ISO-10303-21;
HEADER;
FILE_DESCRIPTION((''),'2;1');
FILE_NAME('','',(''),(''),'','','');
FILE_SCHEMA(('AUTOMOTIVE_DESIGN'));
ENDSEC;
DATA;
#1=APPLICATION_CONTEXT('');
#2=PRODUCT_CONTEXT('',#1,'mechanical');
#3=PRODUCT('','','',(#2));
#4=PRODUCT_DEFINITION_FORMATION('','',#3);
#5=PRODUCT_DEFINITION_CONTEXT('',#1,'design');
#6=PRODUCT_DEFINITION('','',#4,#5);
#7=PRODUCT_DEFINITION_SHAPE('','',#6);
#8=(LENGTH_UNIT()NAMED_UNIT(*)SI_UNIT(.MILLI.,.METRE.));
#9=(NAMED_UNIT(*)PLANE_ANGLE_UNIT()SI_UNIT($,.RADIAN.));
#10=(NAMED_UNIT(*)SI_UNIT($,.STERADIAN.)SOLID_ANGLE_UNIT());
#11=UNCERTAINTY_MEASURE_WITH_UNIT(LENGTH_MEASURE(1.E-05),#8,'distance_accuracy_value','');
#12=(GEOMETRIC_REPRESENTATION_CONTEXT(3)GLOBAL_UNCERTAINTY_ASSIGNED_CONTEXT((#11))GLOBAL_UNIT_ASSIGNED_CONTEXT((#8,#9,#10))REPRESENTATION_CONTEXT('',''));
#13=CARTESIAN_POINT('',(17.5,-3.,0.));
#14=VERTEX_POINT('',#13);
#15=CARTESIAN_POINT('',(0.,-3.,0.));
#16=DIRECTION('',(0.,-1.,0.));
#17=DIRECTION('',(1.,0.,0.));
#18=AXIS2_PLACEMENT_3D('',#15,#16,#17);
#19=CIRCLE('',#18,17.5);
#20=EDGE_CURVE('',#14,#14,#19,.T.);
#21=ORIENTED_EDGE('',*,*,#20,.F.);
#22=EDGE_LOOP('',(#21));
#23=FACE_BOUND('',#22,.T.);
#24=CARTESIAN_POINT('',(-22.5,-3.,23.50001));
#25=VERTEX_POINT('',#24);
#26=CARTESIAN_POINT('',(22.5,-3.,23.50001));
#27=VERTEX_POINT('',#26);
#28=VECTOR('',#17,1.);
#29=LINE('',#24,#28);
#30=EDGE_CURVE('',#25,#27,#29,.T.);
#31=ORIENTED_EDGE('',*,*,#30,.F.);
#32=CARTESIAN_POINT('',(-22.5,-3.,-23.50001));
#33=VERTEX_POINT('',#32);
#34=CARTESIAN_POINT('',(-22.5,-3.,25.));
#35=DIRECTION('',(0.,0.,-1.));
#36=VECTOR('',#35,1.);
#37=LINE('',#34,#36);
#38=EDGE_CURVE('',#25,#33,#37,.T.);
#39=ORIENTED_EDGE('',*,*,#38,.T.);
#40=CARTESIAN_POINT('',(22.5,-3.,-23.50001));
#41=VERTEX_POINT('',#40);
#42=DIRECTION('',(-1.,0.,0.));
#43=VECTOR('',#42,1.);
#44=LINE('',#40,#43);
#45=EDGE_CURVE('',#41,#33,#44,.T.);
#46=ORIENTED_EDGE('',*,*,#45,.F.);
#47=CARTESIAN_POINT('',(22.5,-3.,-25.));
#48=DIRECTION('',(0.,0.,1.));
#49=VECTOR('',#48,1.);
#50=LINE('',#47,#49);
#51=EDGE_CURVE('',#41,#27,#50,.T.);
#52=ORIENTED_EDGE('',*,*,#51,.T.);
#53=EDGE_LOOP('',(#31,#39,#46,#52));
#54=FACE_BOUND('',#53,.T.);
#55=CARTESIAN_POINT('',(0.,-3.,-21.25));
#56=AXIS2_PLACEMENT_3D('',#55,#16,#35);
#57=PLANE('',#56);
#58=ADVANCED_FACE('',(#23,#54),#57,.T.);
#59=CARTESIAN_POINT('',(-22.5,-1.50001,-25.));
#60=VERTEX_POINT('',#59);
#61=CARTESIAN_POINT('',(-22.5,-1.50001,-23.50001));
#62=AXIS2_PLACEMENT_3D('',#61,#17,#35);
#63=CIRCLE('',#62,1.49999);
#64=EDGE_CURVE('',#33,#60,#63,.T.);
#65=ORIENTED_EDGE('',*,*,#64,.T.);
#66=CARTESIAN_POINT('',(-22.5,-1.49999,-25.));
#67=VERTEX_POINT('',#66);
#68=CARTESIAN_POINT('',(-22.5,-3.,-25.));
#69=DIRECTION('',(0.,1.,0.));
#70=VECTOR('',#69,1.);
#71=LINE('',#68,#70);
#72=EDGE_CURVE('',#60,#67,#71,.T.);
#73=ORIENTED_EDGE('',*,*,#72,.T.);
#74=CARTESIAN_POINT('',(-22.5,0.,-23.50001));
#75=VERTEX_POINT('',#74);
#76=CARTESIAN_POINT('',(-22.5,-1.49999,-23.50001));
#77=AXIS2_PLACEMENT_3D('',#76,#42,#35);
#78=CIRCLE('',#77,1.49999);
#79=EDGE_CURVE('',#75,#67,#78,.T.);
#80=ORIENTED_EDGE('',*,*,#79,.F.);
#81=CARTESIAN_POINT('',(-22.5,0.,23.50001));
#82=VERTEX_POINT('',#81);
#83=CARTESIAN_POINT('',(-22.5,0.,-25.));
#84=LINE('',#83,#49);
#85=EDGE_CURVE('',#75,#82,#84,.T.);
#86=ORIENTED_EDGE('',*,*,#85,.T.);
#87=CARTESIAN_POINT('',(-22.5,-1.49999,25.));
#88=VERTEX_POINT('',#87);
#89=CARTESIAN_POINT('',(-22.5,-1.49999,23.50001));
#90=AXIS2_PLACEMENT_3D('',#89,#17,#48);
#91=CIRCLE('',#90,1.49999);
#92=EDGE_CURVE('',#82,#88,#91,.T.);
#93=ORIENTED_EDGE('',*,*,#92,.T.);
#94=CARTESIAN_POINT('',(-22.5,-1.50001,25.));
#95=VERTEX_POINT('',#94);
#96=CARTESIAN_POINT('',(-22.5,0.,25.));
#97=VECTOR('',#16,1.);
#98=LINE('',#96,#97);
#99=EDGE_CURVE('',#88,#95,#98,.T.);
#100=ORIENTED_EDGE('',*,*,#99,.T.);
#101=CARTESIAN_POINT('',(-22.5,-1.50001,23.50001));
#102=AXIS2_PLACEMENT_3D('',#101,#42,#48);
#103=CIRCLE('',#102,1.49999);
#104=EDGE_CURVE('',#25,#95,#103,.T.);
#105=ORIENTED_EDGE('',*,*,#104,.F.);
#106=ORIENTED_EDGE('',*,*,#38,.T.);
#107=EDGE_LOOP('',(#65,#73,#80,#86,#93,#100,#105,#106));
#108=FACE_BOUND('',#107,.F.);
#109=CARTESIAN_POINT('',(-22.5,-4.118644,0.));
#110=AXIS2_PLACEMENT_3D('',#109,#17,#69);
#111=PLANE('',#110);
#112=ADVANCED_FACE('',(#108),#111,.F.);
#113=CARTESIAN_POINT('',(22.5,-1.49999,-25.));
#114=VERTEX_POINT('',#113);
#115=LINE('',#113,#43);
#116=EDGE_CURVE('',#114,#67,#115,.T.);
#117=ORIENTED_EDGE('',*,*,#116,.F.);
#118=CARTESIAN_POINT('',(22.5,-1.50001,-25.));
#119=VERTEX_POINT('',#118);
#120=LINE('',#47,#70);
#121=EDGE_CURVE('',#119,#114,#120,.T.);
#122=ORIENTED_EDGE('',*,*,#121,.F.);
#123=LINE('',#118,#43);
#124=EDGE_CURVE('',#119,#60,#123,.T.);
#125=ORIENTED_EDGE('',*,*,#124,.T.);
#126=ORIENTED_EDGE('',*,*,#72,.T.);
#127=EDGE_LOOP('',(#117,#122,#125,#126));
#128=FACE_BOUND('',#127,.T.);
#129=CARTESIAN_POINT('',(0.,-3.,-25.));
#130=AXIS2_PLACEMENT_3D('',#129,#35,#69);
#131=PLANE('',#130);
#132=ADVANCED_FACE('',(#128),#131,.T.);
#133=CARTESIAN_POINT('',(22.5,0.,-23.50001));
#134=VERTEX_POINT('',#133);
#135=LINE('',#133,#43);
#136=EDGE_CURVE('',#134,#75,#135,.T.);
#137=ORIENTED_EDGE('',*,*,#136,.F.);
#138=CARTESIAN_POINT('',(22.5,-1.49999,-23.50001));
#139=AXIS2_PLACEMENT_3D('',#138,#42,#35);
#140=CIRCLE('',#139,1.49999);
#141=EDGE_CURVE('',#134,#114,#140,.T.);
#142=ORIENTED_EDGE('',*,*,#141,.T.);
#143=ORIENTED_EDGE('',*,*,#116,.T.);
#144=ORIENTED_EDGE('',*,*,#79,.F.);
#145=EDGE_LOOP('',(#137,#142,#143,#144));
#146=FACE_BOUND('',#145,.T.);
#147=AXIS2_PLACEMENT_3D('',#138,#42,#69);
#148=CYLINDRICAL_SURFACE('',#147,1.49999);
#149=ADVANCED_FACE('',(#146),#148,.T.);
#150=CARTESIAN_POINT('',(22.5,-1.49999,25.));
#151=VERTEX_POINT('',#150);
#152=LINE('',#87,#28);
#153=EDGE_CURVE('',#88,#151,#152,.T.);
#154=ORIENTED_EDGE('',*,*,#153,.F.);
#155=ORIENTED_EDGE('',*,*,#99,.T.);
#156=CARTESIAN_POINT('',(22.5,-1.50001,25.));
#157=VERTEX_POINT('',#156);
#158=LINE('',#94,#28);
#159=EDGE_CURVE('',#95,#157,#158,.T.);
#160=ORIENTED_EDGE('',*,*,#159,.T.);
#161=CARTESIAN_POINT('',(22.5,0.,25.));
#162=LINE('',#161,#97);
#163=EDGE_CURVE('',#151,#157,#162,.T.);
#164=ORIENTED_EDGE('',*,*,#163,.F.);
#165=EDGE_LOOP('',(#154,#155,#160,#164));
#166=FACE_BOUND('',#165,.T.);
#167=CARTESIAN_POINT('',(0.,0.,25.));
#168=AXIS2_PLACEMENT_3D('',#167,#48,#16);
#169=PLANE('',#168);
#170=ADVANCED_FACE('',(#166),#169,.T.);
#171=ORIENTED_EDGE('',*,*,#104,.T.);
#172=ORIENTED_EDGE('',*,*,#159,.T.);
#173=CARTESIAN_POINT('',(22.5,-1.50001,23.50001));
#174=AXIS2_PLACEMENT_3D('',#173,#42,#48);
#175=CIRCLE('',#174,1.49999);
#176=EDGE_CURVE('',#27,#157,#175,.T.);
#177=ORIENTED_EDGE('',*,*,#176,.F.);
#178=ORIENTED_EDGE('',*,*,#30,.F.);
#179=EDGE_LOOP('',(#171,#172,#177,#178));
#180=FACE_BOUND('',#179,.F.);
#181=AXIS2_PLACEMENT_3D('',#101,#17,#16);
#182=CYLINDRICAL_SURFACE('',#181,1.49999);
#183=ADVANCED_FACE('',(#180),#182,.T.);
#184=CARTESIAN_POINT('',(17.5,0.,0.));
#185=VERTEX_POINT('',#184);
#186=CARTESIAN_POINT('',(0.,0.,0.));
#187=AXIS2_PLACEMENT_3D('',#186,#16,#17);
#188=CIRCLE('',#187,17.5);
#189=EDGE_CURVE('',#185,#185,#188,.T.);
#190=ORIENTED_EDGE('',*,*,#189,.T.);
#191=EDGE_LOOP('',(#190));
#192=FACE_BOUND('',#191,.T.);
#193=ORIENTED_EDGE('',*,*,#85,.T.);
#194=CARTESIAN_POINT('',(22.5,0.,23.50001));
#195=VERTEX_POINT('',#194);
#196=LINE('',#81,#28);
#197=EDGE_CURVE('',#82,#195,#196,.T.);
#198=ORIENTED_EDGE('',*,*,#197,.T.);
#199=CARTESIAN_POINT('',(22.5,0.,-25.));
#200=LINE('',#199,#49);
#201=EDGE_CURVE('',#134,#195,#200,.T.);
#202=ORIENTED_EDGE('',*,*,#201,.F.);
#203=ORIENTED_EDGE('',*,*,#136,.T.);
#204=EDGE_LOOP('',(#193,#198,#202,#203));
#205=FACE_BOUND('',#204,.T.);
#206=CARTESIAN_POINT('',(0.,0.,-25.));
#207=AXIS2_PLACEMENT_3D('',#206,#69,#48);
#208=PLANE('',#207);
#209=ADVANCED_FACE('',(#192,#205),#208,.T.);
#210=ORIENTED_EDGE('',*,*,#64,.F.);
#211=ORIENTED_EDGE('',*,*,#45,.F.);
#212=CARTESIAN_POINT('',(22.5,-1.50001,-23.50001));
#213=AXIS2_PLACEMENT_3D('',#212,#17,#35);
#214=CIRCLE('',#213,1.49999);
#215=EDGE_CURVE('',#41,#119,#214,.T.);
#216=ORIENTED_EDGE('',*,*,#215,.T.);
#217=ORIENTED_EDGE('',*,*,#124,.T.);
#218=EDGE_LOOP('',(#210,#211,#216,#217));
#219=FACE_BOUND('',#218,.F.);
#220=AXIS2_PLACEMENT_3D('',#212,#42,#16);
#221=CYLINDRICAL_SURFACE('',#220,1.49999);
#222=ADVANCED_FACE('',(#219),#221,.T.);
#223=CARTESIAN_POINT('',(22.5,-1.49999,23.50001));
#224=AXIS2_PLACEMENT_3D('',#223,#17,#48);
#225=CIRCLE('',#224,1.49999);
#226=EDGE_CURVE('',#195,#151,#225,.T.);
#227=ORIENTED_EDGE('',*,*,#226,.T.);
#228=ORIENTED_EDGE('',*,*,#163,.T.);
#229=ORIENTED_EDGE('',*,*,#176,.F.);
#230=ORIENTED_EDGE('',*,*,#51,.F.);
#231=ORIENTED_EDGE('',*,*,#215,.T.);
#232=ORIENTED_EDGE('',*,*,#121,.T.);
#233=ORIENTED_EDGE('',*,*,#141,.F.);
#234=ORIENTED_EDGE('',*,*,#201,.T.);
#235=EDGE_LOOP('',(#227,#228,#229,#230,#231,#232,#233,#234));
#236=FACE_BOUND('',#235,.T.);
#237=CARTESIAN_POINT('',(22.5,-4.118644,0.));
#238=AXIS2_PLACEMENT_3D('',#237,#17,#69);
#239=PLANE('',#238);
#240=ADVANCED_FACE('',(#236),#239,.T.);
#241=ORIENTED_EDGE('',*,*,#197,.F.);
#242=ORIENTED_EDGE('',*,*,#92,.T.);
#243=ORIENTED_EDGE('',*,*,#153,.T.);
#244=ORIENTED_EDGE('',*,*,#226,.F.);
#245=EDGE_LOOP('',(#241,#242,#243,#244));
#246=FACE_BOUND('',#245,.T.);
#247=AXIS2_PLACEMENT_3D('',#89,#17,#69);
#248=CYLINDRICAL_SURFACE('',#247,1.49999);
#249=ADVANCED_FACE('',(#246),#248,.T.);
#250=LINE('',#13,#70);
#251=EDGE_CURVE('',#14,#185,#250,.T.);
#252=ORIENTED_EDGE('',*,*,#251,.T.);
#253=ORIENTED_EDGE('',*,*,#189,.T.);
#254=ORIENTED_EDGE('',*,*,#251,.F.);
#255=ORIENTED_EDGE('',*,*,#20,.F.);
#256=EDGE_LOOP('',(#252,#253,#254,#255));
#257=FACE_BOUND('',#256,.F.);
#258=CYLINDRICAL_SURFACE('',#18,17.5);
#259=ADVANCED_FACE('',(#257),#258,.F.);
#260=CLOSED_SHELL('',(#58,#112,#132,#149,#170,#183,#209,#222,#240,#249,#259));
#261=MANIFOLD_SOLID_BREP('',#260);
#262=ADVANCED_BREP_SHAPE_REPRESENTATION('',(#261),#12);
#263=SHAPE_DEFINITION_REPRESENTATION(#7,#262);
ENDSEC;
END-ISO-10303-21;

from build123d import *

# Parameters (mm, degrees)
F1_DEPTH     = 22.5
F2_R         = 18.6
F3_DEPTH     = 6
F4_R         = 17.5
F5_DEPTH     = 3
F7_DEPTH     = 3
F8_DEPTH     = 3
F14_DEPTH    = 3
F9_T1_DEPTH  = 3
F9_T6_DEPTH  = 3
F9_T11_DEPTH = 3
F15_W        = 6
F15_H        = 97.4
F10_DEPTH    = 45.001
F11_R        = 1.49999


# Not quite as in the source:
# - a fillet or chamfer that OpenCascade refuses, or shapes differently, is made with other operations: its cross-section is extruded or revolved along the edge and cut away or added
# - a fillet or chamfer is up to 0.001 mm smaller than in the source, because OpenCascade refuses the exact size


with BuildPart() as f1:
    # F0 (on Right) → F1 (new body, symmetric)
    with BuildSketch(Plane.YZ):
        Polygon((0, -25), (0, 25), (-3, 25), (-3, 21.25), (-9, 21.25), (-9, -21.25), (-3, -21.25), (-3, -25), align=None)
    extrude(amount=F1_DEPTH, both=True)

    # F2 (on face) → F3 (cut)
    with BuildSketch(Plane.XZ.offset(9)):
        Circle(F2_R)
    extrude(amount=-F3_DEPTH, mode=Mode.SUBTRACT)

    # F4 (on face) → F5 (cut, through all)
    with BuildSketch(Plane.XZ.offset(3)):
        Circle(F4_R)
    extrude(amount=-F5_DEPTH, mode=Mode.SUBTRACT)

    # F6 (on face) → F7 (join)
    with BuildSketch(Plane.XZ.offset(9)):
        with BuildLine():
            Line((-1.6773361726, 21.1145450883), (-1.5, 21.05))
            Line((-1.5, 21.05), (2.8857066002, 21.05))
            Line((2.8857066002, 21.05), (-1.1643059576, 22.5240840195))
            ThreePointArc((-1.1643059576, 22.5240840195), (-1.8221335094, 23.4812290467), (-1.1313028087, 24.4148331565))
            Line((-1.1313028087, 24.4148331565), (1.1823725422, 25.1665918487))
            ThreePointArc((1.1823725422, 25.1665918487), (2.9098300563, 27.5442331395), (1.1823725422, 29.9218744302))
            Line((1.1823725422, 29.9218744302), (-2.6423503277, 31.1646022233))
            ThreePointArc((-2.6423503277, 31.1646022233), (-3.3282367753, 32.0148264964), (-2.8268835217, 32.9853760566))
            Line((-2.8268835217, 32.9853760566), (3.5672088043, 36.6139176646))
            ThreePointArc((3.5672088043, 36.6139176646), (4.8205919381, 39.0402915651), (3.1058758193, 41.165852248))
            Line((3.1058758193, 41.165852248), (-0.0769036922, 42.2))
            Line((-0.0769036922, 42.2), (-4.9310056584, 42.2))
            Line((-4.9310056584, 42.2), (2.6423503277, 39.7392674735))
            ThreePointArc((2.6423503277, 39.7392674735), (3.3282367753, 38.8890432004), (2.8268835217, 37.9184936402))
            Line((2.8268835217, 37.9184936402), (-3.5672088043, 34.2899520321))
            ThreePointArc((-3.5672088043, 34.2899520321), (-4.8205919381, 31.8635781317), (-3.1058758193, 29.7380174488))
            Line((-3.1058758193, 29.7380174488), (0.7188470506, 28.4952896558))
            ThreePointArc((0.7188470506, 28.4952896558), (1.4098300563, 27.5442331395), (0.7188470506, 26.5931766232))
            Line((0.7188470506, 26.5931766232), (-1.5948283002, 25.841417931))
            ThreePointArc((-1.5948283002, 25.841417931), (-3.3219050522, 23.5074076563), (-1.6773361726, 21.1145450883))
        make_face()
        with BuildLine():
            Line((3.5672088043, -36.6139176646), (-2.8268835217, -32.9853760566))
            ThreePointArc((-2.8268835217, -32.9853760566), (-3.3282367753, -32.0148264964), (-2.6423503277, -31.1646022233))
            Line((-2.6423503277, -31.1646022233), (1.1823725422, -29.9218744302))
            ThreePointArc((1.1823725422, -29.9218744302), (2.9098300563, -27.5442331395), (1.1823725422, -25.1665918487))
            Line((1.1823725422, -25.1665918487), (-1.1313028087, -24.4148331565))
            ThreePointArc((-1.1313028087, -24.4148331565), (-1.8221335094, -23.4812290467), (-1.1643059576, -22.5240840195))
            Line((-1.1643059576, -22.5240840195), (2.8857066002, -21.05))
            Line((2.8857066002, -21.05), (-1.5, -21.05))
            Line((-1.5, -21.05), (-1.6773361726, -21.1145450883))
            ThreePointArc((-1.6773361726, -21.1145450883), (-3.3219050522, -23.5074076563), (-1.5948283002, -25.841417931))
            Line((-1.5948283002, -25.841417931), (0.7188470506, -26.5931766232))
            ThreePointArc((0.7188470506, -26.5931766232), (1.4098300563, -27.5442331395), (0.7188470506, -28.4952896558))
            Line((0.7188470506, -28.4952896558), (-3.1058758193, -29.7380174488))
            ThreePointArc((-3.1058758193, -29.7380174488), (-4.8205919381, -31.8635781317), (-3.5672088043, -34.2899520321))
            Line((-3.5672088043, -34.2899520321), (2.8268835217, -37.9184936402))
            ThreePointArc((2.8268835217, -37.9184936402), (3.3282367753, -38.8890432004), (2.6423503277, -39.7392674735))
            Line((2.6423503277, -39.7392674735), (-4.9310056584, -42.2))
            Line((-4.9310056584, -42.2), (-0.0769036922, -42.2))
            Line((-0.0769036922, -42.2), (3.1058758193, -41.165852248))
            ThreePointArc((3.1058758193, -41.165852248), (4.8205919381, -39.0402915651), (3.5672088043, -36.6139176646))
        make_face()
    extrude(amount=-F7_DEPTH)

    # F12 (on face) → F8 (join)
    with BuildSketch(Plane.XZ.offset(9)):
        with BuildLine():
            Line((-10.0039546753, 45.1082380117), (-10.0039546753, 41.7))
            Line((-10.0039546753, 41.7), (-2.5039546753, 41.7))
            Line((-2.5039546753, 41.7), (4.9960453247, 41.7))
            Line((4.9960453247, 41.7), (4.9960453247, 45.1082380117))
            ThreePointArc((4.9960453247, 45.1082380117), (4.9619908828, 45.2896070742), (4.8644663773, 45.446270448))
            ThreePointArc((4.8644663773, 45.446270448), (-2.5039546753, 48.6856217223), (-9.872375728, 45.446270448))
            ThreePointArc((-9.872375728, 45.446270448), (-9.9699002335, 45.2896070742), (-10.0039546753, 45.1082380117))
        make_face()
        with BuildLine():
            Line((4.9960453247, -41.7), (-10.0039546753, -41.7))
            Line((-10.0039546753, -41.7), (-10.0039546753, -45.1082380117))
            ThreePointArc((-10.0039546753, -45.1082380117), (-9.9699002335, -45.2896070742), (-9.872375728, -45.446270448))
            ThreePointArc((-9.872375728, -45.446270448), (-2.5039546753, -48.6856217223), (4.8644663773, -45.446270448))
            ThreePointArc((4.8644663773, -45.446270448), (4.9619908828, -45.2896070742), (4.9960453247, -45.1082380117))
            Line((4.9960453247, -45.1082380117), (4.9960453247, -41.7))
        make_face()
    extrude(amount=-F8_DEPTH)

    # F13 (on face) → F14 (join)
    with BuildSketch(Plane(origin=(0, -6, 0), x_dir=(-1, 0, 0), z_dir=(0, 1, 0))):
        Polygon((-4.9960453247, 41.7), (10.0039546753, 41.7), (10.0039546753, 41.9), (9.0039546753, 42.9), (8.0039546753, 41.9), (7.0039546753, 42.9), (6.0039546753, 41.9), (5.0039546753, 42.9), (4.0039546753, 41.9), (3.0039546753, 42.9), (2.0039546753, 41.9), (1.0039546753, 42.9), (0.0039546753, 41.9), (-0.9960453247, 42.9), (-1.9960453247, 41.9), (-2.9960453247, 42.9), (-3.9960453247, 41.9), (-4.9960453247, 42.9), align=None)
        Polygon((-4.9960453247, -41.7), (-4.9960453247, -42.9), (-3.9960453247, -41.9), (-2.9960453247, -42.9), (-1.9960453247, -41.9), (-0.9960453247, -42.9), (0.0039546753, -41.9), (1.0039546753, -42.9), (2.0039546753, -41.9), (3.0039546753, -42.9), (4.0039546753, -41.9), (5.0039546753, -42.9), (6.0039546753, -41.9), (7.0039546753, -42.9), (8.0039546753, -41.9), (9.0039546753, -42.9), (10.0039546753, -41.9), (10.0039546753, -41.7), align=None)
    extrude(amount=F14_DEPTH)

    # F9: fillet of radius 1 on 8 edges, made by hand

    # F9_s2 → F9_t1 (join)
    with BuildSketch(Plane.XZ.offset(6)):
        with BuildLine():
            ThreePointArc((-3.1671397399, 22.5967933258), (-3.2844738139, 21.6785077979), (-4.1050813101, 21.25))
            Line((-4.1050813101, 21.25), (-1.9838334832, 21.25))
            ThreePointArc((-1.9838334832, 21.25), (-2.7003635819, 21.813678492), (-3.1671397399, 22.5967933258))
        make_face()
        with BuildLine():
            ThreePointArc((2.1705179537, 21.3103073792), (2.3388899194, 21.265192247), (2.5125380971, 21.25))
            Line((2.5125380971, 21.25), (2.3362111164, 21.25))
            Line((2.3362111164, 21.25), (2.1705179537, 21.3103073792))
        make_face()
        with BuildLine():
            ThreePointArc((-3.2415313358, 41.6510565163), (-3.3941138651, 41.6876883406), (-3.5505483302, 41.7))
            Line((-3.5505483302, 41.7), (-3.3921638899, 41.7))
            Line((-3.3921638899, 41.7), (-3.2415313358, 41.6510565163))
        make_face()
        with BuildLine():
            ThreePointArc((-3.1671397399, -22.5967933258), (-3.2844738139, -21.6785077979), (-4.1050813101, -21.25))
            Line((-4.1050813101, -21.25), (-1.9838334832, -21.25))
            ThreePointArc((-1.9838334832, -21.25), (-2.7003635819, -21.813678492), (-3.1671397399, -22.5967933258))
        make_face()
        with BuildLine():
            ThreePointArc((-3.5505483302, -41.7), (-3.3941138651, -41.6876883406), (-3.2415313358, -41.6510565163))
            Line((-3.2415313358, -41.6510565163), (-3.3921638899, -41.7))
            Line((-3.3921638899, -41.7), (-3.5505483302, -41.7))
        make_face()
        with BuildLine():
            ThreePointArc((2.1705179537, -21.3103073792), (2.3388899194, -21.265192247), (2.5125380971, -21.25))
            Line((2.5125380971, -21.25), (2.3362111164, -21.25))
            Line((2.3362111164, -21.25), (2.1705179537, -21.3103073792))
        make_face()
    extrude(amount=F9_T1_DEPTH)


with BuildPart() as f9_tool4:
    # F9_s5 → F9_t6 (new body)
    with BuildSketch(Plane.XZ.offset(9)):
        with BuildLine():
            ThreePointArc((5.265067062, 41.7), (4.3857987751, 41.1763268621), (4.4274288538, 40.1537745592))
            Line((4.4274288538, 40.1537745592), (4.343665033, 40.0991520151))
            ThreePointArc((4.343665033, 40.0991520151), (3.0749741198, 41.0707465963), (1.431036377, 41.6048943484))
            Line((1.431036377, 41.6048943484), (1.4619380764, 41.8))
            Line((1.4619380764, 41.8), (5.265067062, 41.8))
            Line((5.265067062, 41.8), (5.265067062, 41.7))
        make_face()
    extrude(amount=-F9_T6_DEPTH)

    split(bisect_by=Plane.YZ.offset(4.9960453247), keep=Keep.BOTTOM)


with BuildPart() as f1_1:
    add(f1.part)

    # F9_t3: union F9_tool4
    add(f9_tool4.part)


with BuildPart() as f9_tool9:
    # F9_s10 → F9_t11 (new body)
    with BuildSketch(Plane.XZ.offset(6)):
        with BuildLine():
            ThreePointArc((4.4274288538, -40.1537745592), (4.3857987751, -41.1763268621), (5.265067062, -41.7))
            Line((5.265067062, -41.7), (5.265067062, -41.8))
            Line((5.265067062, -41.8), (1.4619380764, -41.8))
            Line((1.4619380764, -41.8), (1.431036377, -41.6048943484))
            ThreePointArc((1.431036377, -41.6048943484), (3.0749741198, -41.0707465963), (4.343665033, -40.0991520151))
            Line((4.343665033, -40.0991520151), (4.4274288538, -40.1537745592))
        make_face()
    extrude(amount=F9_T11_DEPTH)

    split(bisect_by=Plane.YZ.offset(4.9960453247), keep=Keep.BOTTOM)


with BuildPart() as f1_2:
    add(f1_1.part)

    # F9_t8: union F9_tool9
    add(f9_tool9.part)

    # F15 (on face) → F10 (cut, through all)
    with BuildSketch(Plane.YZ.offset(22.5)):
        with Locations((-6, 0)):
            Rectangle(F15_W, F15_H)
    extrude(amount=-F10_DEPTH, mode=Mode.SUBTRACT)

    # F11 (radius 1.5 in the source; OpenCascade refuses exactly that, so slightly less here)
    f11_edges = [f1_2.edges().sort_by_distance(p)[0] for p in [
        (0, -3, 25),
        (0, 0, 25),
        (0, -3, -25),
        (0, 0, -25),
    ]]
    fillet(f11_edges, radius=F11_R)


solid = f1_2.part
